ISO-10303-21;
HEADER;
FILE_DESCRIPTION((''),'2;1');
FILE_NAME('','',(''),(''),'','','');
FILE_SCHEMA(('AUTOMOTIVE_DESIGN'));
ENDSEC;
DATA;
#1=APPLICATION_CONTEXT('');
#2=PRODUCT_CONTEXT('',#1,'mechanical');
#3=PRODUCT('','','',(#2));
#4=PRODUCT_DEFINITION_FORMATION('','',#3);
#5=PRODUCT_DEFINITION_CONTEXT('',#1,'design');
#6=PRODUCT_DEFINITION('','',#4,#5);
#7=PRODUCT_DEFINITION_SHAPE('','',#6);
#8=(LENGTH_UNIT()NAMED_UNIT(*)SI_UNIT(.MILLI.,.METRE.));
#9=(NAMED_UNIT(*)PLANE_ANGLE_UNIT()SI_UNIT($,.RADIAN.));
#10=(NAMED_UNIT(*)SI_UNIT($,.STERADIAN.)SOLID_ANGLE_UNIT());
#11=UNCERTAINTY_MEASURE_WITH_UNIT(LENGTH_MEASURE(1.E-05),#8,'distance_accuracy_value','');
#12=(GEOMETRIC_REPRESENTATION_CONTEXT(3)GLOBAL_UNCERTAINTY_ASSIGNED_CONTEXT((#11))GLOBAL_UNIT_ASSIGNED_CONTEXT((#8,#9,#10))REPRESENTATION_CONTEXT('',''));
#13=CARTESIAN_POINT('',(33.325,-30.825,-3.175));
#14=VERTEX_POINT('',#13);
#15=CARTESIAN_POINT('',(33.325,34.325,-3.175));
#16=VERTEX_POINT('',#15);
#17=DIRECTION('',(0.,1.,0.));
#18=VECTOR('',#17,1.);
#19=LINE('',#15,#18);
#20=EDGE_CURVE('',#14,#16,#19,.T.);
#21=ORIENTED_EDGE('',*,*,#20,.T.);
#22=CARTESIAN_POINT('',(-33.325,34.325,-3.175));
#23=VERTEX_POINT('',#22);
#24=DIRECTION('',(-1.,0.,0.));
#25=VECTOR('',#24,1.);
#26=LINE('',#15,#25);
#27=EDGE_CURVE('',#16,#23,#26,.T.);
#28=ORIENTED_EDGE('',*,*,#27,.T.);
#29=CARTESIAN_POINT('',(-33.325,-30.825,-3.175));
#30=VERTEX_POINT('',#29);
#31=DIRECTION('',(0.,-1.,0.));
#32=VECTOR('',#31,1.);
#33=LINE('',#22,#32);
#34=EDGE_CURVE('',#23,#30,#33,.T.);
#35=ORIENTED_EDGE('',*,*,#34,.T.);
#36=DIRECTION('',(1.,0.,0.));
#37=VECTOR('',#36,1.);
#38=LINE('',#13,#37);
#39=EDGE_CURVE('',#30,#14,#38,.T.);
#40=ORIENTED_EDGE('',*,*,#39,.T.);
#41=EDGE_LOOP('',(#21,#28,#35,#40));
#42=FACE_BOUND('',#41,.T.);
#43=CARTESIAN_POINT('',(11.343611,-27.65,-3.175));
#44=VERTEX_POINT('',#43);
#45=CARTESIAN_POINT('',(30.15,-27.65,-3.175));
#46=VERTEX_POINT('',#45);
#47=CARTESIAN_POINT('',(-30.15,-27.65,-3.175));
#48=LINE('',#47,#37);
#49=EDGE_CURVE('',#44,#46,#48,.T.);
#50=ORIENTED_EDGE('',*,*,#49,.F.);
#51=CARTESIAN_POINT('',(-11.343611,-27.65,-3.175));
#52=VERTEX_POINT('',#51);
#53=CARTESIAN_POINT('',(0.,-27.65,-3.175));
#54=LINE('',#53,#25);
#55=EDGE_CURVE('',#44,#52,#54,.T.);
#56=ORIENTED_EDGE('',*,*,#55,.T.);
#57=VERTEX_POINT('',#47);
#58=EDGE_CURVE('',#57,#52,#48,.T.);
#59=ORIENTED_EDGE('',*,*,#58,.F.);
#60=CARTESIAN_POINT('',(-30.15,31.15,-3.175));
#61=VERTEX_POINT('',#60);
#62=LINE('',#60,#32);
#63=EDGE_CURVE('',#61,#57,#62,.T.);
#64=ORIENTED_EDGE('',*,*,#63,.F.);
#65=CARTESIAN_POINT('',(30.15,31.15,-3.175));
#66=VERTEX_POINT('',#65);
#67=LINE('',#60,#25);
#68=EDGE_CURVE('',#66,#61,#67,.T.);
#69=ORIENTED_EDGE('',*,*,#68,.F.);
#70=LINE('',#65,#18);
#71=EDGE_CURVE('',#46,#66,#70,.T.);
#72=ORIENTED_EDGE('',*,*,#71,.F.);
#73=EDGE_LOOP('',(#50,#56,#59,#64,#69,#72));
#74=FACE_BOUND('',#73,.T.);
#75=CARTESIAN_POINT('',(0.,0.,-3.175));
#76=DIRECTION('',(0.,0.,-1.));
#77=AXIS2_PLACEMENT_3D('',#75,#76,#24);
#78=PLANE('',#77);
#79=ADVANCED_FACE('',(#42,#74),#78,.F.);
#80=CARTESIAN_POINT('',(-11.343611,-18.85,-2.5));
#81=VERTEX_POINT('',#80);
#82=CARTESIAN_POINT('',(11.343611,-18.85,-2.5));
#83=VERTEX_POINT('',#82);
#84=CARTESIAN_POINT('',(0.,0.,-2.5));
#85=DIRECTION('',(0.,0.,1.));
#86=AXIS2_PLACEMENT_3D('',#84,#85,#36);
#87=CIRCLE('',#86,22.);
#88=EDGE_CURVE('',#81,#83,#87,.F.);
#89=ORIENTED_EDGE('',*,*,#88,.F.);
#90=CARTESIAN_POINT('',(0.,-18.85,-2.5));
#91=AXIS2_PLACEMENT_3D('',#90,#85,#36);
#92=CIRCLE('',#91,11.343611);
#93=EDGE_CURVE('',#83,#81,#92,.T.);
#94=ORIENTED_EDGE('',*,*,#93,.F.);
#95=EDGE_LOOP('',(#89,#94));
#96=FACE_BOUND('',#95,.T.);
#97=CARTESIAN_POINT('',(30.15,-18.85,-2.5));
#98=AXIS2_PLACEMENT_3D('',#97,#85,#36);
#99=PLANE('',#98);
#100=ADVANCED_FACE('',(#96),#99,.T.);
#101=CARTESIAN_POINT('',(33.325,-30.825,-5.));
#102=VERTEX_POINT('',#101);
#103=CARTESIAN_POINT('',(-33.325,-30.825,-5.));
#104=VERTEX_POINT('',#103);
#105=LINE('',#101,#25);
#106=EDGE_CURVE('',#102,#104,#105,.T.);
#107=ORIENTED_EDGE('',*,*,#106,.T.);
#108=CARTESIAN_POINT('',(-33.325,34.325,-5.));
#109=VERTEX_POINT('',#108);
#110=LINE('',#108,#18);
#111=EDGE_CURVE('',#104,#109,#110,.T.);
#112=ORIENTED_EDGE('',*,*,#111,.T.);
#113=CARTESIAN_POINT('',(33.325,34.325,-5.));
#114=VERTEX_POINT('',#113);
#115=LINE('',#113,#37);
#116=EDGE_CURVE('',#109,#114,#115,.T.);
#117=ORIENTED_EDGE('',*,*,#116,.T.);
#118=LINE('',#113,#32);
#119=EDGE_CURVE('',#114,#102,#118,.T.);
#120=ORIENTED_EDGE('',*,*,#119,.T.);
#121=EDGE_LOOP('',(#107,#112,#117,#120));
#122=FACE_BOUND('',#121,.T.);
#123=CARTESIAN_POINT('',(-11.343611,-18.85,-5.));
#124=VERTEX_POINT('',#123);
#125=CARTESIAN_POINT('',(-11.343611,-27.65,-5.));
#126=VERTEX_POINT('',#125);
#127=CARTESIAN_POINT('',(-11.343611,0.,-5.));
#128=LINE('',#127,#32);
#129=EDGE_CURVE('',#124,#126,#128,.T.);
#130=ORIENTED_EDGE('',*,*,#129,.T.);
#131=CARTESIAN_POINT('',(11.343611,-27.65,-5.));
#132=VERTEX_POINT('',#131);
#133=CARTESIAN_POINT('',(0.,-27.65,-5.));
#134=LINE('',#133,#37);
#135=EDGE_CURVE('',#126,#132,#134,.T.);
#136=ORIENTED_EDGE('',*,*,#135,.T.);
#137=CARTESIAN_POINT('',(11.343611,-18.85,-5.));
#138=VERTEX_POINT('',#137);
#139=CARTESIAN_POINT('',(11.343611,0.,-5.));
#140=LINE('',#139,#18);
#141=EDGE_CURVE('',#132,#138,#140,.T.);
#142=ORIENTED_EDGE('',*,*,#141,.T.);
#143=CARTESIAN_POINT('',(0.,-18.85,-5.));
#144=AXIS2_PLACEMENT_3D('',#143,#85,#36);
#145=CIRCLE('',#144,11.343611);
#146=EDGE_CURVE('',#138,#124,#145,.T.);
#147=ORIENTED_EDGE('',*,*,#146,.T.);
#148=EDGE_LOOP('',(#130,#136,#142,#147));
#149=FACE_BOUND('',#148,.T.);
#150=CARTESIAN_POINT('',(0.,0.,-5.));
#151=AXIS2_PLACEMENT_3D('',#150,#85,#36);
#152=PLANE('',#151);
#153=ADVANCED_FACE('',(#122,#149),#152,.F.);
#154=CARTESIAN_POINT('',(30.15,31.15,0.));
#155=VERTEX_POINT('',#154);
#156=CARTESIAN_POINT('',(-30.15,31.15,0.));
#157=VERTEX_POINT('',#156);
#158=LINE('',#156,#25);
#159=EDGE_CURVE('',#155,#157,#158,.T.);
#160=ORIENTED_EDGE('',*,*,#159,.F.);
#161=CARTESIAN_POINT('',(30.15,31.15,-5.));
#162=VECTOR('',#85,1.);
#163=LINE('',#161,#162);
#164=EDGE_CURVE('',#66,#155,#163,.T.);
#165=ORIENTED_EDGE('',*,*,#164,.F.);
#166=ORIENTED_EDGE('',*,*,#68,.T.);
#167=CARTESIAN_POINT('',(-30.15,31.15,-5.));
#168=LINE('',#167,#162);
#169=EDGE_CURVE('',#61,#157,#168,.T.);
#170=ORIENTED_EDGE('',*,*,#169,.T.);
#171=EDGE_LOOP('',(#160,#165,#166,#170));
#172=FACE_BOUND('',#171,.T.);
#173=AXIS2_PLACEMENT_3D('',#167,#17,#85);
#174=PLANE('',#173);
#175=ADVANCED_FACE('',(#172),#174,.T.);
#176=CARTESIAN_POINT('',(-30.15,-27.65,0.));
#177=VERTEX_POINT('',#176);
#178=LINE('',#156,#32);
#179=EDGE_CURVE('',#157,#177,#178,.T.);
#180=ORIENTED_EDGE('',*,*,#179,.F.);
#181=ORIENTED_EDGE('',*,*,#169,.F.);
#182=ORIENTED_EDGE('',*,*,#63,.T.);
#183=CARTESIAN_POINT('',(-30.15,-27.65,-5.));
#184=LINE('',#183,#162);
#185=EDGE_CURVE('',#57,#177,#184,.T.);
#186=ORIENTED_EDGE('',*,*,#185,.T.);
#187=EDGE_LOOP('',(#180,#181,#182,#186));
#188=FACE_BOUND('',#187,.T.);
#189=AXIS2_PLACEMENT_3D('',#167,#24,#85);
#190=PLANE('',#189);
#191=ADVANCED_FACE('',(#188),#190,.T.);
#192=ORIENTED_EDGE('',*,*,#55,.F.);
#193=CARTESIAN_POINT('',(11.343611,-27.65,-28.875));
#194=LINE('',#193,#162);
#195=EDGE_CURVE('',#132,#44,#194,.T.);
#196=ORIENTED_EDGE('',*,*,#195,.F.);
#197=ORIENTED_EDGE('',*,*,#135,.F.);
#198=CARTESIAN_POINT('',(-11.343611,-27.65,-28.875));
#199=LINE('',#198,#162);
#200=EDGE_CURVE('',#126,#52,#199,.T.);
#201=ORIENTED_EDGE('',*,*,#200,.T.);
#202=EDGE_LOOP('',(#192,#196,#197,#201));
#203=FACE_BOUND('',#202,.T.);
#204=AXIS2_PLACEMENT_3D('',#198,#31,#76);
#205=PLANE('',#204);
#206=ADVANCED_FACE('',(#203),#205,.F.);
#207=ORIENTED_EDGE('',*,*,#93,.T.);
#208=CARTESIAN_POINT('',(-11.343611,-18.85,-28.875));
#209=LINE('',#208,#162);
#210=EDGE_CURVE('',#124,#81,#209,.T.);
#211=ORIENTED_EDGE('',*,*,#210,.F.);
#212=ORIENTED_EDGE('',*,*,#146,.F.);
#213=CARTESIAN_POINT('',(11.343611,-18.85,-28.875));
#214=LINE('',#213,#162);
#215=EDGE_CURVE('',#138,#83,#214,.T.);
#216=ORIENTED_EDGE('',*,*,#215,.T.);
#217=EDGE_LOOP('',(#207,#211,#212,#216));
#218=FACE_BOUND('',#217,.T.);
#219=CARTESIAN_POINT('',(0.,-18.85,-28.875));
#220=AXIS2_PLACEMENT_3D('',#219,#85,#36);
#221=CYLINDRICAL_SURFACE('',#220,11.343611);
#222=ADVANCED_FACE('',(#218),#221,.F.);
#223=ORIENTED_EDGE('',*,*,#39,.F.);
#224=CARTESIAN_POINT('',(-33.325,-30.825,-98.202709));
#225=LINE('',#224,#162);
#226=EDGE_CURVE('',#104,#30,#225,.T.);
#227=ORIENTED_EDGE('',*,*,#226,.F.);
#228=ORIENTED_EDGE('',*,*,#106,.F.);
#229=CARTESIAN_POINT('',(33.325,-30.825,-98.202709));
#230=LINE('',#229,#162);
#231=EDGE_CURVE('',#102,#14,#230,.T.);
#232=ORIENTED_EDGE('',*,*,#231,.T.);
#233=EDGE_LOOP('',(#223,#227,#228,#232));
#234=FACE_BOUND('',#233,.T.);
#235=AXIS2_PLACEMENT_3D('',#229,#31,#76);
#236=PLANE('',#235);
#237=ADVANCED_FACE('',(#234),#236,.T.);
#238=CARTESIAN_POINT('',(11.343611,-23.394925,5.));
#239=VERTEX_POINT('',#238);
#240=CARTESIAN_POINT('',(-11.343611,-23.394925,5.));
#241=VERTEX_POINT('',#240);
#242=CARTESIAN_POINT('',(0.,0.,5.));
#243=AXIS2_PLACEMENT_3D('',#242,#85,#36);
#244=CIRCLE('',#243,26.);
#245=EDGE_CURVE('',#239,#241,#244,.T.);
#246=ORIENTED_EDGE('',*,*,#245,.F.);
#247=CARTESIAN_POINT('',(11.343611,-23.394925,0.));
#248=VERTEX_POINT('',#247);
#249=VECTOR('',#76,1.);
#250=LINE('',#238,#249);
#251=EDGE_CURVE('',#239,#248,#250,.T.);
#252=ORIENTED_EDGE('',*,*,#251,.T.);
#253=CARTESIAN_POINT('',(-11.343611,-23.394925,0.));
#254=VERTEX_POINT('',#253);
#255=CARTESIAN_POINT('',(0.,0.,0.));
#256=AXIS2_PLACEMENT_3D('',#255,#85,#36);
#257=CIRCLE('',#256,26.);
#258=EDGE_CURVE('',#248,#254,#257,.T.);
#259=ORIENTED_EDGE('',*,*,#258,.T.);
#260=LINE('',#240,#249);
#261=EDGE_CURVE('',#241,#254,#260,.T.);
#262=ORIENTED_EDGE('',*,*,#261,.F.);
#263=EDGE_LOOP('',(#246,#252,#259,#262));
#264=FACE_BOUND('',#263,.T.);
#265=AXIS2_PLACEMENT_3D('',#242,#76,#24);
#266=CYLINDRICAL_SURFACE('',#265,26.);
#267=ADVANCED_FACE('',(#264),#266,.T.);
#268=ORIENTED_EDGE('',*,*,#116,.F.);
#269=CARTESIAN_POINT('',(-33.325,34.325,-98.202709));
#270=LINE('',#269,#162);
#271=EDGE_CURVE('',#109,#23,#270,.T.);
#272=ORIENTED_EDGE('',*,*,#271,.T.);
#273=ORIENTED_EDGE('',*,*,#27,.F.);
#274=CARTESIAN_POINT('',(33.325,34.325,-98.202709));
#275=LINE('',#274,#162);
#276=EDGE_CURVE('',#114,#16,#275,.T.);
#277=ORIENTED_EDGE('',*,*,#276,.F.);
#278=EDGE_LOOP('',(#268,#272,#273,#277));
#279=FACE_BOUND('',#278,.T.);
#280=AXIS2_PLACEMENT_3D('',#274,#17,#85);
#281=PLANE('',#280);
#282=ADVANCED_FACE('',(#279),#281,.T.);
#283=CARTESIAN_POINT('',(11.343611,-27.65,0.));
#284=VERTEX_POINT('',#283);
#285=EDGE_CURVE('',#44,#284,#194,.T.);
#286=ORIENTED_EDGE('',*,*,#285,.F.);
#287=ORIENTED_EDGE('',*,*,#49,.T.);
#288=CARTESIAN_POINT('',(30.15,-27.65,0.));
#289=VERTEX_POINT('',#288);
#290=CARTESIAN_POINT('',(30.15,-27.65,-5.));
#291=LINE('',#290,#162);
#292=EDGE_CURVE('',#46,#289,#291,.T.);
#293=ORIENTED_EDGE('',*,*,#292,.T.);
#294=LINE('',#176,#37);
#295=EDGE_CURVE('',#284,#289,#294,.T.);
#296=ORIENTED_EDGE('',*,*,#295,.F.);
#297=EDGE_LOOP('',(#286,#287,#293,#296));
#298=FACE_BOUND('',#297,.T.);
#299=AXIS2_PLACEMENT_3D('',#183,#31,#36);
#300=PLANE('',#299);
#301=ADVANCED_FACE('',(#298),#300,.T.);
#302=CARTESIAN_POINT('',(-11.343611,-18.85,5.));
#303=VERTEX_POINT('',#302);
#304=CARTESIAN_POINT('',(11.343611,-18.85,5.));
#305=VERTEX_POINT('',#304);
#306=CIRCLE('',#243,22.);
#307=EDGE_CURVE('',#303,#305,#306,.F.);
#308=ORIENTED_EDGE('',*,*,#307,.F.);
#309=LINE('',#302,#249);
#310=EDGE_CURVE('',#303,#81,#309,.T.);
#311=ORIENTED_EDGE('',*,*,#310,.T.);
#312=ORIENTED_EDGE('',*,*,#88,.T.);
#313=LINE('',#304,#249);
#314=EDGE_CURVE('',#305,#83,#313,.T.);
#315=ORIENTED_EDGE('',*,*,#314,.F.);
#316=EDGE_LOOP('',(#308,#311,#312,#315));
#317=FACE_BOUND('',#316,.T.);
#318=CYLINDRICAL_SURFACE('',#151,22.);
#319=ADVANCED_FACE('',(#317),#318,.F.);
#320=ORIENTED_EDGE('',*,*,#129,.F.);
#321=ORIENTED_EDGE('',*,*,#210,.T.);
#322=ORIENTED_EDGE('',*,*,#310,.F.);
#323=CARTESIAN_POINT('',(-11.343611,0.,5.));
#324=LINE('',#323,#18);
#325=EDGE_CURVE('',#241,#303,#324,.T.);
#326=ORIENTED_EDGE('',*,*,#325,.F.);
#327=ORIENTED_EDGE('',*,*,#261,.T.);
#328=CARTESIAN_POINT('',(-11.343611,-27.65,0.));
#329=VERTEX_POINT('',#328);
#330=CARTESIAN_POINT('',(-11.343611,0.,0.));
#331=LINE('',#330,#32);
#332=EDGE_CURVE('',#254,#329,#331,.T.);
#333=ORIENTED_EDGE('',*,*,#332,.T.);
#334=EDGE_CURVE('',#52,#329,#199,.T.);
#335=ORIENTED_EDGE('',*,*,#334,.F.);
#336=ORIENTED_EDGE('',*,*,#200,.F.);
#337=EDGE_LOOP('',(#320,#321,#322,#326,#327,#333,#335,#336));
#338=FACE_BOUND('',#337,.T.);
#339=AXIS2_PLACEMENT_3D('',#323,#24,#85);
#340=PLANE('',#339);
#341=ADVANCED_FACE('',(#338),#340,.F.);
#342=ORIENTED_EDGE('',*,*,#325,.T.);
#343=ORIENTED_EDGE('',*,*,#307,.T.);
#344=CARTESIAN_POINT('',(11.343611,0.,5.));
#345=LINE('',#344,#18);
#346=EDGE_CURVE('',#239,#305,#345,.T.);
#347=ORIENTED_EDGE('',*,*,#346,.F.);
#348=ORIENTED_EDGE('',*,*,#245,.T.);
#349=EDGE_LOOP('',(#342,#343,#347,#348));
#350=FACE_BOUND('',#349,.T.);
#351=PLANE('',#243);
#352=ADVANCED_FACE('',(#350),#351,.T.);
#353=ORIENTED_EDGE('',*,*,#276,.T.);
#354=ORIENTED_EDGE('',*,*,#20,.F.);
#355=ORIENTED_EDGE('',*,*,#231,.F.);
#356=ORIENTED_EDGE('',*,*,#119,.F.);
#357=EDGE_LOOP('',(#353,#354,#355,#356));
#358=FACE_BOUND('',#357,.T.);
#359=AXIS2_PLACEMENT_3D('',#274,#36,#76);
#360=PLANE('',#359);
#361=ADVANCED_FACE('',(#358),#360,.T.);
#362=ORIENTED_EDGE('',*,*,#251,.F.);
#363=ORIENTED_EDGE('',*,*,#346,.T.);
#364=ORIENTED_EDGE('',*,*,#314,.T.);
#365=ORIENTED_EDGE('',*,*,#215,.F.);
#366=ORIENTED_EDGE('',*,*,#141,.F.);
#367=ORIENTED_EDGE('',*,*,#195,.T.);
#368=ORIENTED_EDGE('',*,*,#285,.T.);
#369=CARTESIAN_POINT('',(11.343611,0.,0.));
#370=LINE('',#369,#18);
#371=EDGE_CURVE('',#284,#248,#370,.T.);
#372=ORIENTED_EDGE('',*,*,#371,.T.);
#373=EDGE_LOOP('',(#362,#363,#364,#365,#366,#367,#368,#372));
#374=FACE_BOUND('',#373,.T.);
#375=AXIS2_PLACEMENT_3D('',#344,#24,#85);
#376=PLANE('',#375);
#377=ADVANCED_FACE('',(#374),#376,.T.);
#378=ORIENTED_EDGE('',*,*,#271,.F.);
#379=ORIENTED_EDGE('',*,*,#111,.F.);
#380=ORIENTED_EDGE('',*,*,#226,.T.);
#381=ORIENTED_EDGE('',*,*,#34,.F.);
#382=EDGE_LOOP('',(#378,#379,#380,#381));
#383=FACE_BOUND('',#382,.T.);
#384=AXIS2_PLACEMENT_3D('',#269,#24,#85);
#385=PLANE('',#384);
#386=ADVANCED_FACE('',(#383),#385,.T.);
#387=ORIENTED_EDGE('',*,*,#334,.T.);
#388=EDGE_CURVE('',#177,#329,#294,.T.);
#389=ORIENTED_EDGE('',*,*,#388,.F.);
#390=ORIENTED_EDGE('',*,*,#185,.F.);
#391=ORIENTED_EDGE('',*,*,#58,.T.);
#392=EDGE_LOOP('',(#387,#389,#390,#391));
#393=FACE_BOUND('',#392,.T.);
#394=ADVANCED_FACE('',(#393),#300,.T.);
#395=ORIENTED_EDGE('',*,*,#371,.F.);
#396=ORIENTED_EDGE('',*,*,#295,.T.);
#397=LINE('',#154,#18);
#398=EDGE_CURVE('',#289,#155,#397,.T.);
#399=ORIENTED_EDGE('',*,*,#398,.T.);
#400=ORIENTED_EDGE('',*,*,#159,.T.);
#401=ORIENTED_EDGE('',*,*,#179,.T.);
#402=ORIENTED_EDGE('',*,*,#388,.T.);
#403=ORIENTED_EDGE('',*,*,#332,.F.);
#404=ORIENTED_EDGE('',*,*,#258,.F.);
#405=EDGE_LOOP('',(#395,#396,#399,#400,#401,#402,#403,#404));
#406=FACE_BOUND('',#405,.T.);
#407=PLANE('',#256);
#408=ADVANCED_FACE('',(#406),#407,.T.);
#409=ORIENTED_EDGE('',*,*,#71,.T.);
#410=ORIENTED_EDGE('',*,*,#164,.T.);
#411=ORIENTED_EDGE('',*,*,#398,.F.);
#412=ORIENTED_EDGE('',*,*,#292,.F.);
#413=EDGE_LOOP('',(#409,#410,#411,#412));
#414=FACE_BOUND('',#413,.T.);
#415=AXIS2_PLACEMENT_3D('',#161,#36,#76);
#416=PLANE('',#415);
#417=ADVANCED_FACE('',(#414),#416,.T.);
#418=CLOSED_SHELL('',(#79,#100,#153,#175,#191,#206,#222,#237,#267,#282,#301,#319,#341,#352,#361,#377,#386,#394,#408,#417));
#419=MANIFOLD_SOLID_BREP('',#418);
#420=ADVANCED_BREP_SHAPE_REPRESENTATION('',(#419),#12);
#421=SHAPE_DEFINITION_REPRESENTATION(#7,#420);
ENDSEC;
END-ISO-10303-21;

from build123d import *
from build123d.topology import SkipClean

# Parameters (mm, degrees)
SKETCH16_W           = 60.3
SKETCH16_H           = 58.8
SKETCH16_R           = 22
BOSS_EXTRUDE2_DEPTH  = 5
SKETCH22_W           = 60.3
SKETCH22_H           = 2.5
BOSS_EXTRUDE7_DEPTH  = 50
BOSS_EXTRUDE8_START  = 5
BOSS_EXTRUDE8_DEPTH  = 5
SKETCH27_W           = 66.65
SKETCH27_H           = 65.15
BOSS_EXTRUDE10_DEPTH = 1.825
CUT_EXTRUDE3_DEPTH   = 26.375


with BuildPart() as part:
    # Sketch16 → Boss-Extrude2 (new body)
    with BuildSketch(Plane.XY):
        with Locations((0, 1.75)):
            Rectangle(SKETCH16_W, SKETCH16_H)
        Circle(SKETCH16_R, mode=Mode.SUBTRACT)
    extrude(amount=-BOSS_EXTRUDE2_DEPTH)

    # Sketch22 → Boss-Extrude7 (add)
    with BuildSketch(Plane(origin=(0, 31.15, 0), x_dir=(1, 0, 0), z_dir=(0, 1, 0))):
        with Locations((0, 3.75)):
            Rectangle(SKETCH22_W, SKETCH22_H)
    extrude(amount=-BOSS_EXTRUDE7_DEPTH)

    # Sketch23 → Boss-Extrude8 (add)
    with SkipClean():  # the faces are left unmerged after this step: merging them gives an invalid solid
        with BuildSketch(Plane.XY.offset(BOSS_EXTRUDE8_START)):
            with BuildLine():
                ThreePointArc((26, 0), (-13.803371437, 22.033314253), (-11.343610536, -23.394924663))
                Line((-11.343610536, -23.394924663), (-11.343610536, -18.85))
                ThreePointArc((-11.343610536, -18.85), (-10.826831674, 19.151493829), (22, 0))
                Line((22, 0), (22, -13.856406461))
                ThreePointArc((22, -13.856406461), (24.979991994, -7.211102551), (26, 0))
            make_face()
            with BuildLine():
                Line((11.343610536, -18.85), (11.343610536, -23.394924663))
                ThreePointArc((11.343610536, -23.394924663), (17.340557179, -19.372792177), (22, -13.856406461))
                Line((22, -13.856406461), (22, 0))
                ThreePointArc((22, 0), (19.151493829, -10.826831674), (11.343610536, -18.85))
            make_face()
        extrude(amount=-BOSS_EXTRUDE8_DEPTH)

    # Sketch27 → Boss-Extrude10 (add)
    with SkipClean():  # the faces are left unmerged after this step: merging them gives an invalid solid
        with BuildSketch(Plane.XY.offset(-3.175)):
            with Locations((0, 1.75)):
                Rectangle(SKETCH27_W, SKETCH27_H)
        extrude(amount=-BOSS_EXTRUDE10_DEPTH)

    # Sketch24 → Cut-Extrude3 (cut, symmetric)
    with SkipClean():  # the faces are left unmerged after this step: merging them gives an invalid solid
        with BuildSketch(Plane.XY.offset(-2.5)):
            with BuildLine():
                Line((-11.343610536, -18.85), (-11.343610536, -27.65))
                Line((-11.343610536, -27.65), (11.343610536, -27.65))
                Line((11.343610536, -27.65), (11.343610536, -18.85))
                ThreePointArc((11.343610536, -18.85), (0, -7.506389464), (-11.343610536, -18.85))
            make_face()
        extrude(amount=CUT_EXTRUDE3_DEPTH, both=True, mode=Mode.SUBTRACT)


solid = part.part
